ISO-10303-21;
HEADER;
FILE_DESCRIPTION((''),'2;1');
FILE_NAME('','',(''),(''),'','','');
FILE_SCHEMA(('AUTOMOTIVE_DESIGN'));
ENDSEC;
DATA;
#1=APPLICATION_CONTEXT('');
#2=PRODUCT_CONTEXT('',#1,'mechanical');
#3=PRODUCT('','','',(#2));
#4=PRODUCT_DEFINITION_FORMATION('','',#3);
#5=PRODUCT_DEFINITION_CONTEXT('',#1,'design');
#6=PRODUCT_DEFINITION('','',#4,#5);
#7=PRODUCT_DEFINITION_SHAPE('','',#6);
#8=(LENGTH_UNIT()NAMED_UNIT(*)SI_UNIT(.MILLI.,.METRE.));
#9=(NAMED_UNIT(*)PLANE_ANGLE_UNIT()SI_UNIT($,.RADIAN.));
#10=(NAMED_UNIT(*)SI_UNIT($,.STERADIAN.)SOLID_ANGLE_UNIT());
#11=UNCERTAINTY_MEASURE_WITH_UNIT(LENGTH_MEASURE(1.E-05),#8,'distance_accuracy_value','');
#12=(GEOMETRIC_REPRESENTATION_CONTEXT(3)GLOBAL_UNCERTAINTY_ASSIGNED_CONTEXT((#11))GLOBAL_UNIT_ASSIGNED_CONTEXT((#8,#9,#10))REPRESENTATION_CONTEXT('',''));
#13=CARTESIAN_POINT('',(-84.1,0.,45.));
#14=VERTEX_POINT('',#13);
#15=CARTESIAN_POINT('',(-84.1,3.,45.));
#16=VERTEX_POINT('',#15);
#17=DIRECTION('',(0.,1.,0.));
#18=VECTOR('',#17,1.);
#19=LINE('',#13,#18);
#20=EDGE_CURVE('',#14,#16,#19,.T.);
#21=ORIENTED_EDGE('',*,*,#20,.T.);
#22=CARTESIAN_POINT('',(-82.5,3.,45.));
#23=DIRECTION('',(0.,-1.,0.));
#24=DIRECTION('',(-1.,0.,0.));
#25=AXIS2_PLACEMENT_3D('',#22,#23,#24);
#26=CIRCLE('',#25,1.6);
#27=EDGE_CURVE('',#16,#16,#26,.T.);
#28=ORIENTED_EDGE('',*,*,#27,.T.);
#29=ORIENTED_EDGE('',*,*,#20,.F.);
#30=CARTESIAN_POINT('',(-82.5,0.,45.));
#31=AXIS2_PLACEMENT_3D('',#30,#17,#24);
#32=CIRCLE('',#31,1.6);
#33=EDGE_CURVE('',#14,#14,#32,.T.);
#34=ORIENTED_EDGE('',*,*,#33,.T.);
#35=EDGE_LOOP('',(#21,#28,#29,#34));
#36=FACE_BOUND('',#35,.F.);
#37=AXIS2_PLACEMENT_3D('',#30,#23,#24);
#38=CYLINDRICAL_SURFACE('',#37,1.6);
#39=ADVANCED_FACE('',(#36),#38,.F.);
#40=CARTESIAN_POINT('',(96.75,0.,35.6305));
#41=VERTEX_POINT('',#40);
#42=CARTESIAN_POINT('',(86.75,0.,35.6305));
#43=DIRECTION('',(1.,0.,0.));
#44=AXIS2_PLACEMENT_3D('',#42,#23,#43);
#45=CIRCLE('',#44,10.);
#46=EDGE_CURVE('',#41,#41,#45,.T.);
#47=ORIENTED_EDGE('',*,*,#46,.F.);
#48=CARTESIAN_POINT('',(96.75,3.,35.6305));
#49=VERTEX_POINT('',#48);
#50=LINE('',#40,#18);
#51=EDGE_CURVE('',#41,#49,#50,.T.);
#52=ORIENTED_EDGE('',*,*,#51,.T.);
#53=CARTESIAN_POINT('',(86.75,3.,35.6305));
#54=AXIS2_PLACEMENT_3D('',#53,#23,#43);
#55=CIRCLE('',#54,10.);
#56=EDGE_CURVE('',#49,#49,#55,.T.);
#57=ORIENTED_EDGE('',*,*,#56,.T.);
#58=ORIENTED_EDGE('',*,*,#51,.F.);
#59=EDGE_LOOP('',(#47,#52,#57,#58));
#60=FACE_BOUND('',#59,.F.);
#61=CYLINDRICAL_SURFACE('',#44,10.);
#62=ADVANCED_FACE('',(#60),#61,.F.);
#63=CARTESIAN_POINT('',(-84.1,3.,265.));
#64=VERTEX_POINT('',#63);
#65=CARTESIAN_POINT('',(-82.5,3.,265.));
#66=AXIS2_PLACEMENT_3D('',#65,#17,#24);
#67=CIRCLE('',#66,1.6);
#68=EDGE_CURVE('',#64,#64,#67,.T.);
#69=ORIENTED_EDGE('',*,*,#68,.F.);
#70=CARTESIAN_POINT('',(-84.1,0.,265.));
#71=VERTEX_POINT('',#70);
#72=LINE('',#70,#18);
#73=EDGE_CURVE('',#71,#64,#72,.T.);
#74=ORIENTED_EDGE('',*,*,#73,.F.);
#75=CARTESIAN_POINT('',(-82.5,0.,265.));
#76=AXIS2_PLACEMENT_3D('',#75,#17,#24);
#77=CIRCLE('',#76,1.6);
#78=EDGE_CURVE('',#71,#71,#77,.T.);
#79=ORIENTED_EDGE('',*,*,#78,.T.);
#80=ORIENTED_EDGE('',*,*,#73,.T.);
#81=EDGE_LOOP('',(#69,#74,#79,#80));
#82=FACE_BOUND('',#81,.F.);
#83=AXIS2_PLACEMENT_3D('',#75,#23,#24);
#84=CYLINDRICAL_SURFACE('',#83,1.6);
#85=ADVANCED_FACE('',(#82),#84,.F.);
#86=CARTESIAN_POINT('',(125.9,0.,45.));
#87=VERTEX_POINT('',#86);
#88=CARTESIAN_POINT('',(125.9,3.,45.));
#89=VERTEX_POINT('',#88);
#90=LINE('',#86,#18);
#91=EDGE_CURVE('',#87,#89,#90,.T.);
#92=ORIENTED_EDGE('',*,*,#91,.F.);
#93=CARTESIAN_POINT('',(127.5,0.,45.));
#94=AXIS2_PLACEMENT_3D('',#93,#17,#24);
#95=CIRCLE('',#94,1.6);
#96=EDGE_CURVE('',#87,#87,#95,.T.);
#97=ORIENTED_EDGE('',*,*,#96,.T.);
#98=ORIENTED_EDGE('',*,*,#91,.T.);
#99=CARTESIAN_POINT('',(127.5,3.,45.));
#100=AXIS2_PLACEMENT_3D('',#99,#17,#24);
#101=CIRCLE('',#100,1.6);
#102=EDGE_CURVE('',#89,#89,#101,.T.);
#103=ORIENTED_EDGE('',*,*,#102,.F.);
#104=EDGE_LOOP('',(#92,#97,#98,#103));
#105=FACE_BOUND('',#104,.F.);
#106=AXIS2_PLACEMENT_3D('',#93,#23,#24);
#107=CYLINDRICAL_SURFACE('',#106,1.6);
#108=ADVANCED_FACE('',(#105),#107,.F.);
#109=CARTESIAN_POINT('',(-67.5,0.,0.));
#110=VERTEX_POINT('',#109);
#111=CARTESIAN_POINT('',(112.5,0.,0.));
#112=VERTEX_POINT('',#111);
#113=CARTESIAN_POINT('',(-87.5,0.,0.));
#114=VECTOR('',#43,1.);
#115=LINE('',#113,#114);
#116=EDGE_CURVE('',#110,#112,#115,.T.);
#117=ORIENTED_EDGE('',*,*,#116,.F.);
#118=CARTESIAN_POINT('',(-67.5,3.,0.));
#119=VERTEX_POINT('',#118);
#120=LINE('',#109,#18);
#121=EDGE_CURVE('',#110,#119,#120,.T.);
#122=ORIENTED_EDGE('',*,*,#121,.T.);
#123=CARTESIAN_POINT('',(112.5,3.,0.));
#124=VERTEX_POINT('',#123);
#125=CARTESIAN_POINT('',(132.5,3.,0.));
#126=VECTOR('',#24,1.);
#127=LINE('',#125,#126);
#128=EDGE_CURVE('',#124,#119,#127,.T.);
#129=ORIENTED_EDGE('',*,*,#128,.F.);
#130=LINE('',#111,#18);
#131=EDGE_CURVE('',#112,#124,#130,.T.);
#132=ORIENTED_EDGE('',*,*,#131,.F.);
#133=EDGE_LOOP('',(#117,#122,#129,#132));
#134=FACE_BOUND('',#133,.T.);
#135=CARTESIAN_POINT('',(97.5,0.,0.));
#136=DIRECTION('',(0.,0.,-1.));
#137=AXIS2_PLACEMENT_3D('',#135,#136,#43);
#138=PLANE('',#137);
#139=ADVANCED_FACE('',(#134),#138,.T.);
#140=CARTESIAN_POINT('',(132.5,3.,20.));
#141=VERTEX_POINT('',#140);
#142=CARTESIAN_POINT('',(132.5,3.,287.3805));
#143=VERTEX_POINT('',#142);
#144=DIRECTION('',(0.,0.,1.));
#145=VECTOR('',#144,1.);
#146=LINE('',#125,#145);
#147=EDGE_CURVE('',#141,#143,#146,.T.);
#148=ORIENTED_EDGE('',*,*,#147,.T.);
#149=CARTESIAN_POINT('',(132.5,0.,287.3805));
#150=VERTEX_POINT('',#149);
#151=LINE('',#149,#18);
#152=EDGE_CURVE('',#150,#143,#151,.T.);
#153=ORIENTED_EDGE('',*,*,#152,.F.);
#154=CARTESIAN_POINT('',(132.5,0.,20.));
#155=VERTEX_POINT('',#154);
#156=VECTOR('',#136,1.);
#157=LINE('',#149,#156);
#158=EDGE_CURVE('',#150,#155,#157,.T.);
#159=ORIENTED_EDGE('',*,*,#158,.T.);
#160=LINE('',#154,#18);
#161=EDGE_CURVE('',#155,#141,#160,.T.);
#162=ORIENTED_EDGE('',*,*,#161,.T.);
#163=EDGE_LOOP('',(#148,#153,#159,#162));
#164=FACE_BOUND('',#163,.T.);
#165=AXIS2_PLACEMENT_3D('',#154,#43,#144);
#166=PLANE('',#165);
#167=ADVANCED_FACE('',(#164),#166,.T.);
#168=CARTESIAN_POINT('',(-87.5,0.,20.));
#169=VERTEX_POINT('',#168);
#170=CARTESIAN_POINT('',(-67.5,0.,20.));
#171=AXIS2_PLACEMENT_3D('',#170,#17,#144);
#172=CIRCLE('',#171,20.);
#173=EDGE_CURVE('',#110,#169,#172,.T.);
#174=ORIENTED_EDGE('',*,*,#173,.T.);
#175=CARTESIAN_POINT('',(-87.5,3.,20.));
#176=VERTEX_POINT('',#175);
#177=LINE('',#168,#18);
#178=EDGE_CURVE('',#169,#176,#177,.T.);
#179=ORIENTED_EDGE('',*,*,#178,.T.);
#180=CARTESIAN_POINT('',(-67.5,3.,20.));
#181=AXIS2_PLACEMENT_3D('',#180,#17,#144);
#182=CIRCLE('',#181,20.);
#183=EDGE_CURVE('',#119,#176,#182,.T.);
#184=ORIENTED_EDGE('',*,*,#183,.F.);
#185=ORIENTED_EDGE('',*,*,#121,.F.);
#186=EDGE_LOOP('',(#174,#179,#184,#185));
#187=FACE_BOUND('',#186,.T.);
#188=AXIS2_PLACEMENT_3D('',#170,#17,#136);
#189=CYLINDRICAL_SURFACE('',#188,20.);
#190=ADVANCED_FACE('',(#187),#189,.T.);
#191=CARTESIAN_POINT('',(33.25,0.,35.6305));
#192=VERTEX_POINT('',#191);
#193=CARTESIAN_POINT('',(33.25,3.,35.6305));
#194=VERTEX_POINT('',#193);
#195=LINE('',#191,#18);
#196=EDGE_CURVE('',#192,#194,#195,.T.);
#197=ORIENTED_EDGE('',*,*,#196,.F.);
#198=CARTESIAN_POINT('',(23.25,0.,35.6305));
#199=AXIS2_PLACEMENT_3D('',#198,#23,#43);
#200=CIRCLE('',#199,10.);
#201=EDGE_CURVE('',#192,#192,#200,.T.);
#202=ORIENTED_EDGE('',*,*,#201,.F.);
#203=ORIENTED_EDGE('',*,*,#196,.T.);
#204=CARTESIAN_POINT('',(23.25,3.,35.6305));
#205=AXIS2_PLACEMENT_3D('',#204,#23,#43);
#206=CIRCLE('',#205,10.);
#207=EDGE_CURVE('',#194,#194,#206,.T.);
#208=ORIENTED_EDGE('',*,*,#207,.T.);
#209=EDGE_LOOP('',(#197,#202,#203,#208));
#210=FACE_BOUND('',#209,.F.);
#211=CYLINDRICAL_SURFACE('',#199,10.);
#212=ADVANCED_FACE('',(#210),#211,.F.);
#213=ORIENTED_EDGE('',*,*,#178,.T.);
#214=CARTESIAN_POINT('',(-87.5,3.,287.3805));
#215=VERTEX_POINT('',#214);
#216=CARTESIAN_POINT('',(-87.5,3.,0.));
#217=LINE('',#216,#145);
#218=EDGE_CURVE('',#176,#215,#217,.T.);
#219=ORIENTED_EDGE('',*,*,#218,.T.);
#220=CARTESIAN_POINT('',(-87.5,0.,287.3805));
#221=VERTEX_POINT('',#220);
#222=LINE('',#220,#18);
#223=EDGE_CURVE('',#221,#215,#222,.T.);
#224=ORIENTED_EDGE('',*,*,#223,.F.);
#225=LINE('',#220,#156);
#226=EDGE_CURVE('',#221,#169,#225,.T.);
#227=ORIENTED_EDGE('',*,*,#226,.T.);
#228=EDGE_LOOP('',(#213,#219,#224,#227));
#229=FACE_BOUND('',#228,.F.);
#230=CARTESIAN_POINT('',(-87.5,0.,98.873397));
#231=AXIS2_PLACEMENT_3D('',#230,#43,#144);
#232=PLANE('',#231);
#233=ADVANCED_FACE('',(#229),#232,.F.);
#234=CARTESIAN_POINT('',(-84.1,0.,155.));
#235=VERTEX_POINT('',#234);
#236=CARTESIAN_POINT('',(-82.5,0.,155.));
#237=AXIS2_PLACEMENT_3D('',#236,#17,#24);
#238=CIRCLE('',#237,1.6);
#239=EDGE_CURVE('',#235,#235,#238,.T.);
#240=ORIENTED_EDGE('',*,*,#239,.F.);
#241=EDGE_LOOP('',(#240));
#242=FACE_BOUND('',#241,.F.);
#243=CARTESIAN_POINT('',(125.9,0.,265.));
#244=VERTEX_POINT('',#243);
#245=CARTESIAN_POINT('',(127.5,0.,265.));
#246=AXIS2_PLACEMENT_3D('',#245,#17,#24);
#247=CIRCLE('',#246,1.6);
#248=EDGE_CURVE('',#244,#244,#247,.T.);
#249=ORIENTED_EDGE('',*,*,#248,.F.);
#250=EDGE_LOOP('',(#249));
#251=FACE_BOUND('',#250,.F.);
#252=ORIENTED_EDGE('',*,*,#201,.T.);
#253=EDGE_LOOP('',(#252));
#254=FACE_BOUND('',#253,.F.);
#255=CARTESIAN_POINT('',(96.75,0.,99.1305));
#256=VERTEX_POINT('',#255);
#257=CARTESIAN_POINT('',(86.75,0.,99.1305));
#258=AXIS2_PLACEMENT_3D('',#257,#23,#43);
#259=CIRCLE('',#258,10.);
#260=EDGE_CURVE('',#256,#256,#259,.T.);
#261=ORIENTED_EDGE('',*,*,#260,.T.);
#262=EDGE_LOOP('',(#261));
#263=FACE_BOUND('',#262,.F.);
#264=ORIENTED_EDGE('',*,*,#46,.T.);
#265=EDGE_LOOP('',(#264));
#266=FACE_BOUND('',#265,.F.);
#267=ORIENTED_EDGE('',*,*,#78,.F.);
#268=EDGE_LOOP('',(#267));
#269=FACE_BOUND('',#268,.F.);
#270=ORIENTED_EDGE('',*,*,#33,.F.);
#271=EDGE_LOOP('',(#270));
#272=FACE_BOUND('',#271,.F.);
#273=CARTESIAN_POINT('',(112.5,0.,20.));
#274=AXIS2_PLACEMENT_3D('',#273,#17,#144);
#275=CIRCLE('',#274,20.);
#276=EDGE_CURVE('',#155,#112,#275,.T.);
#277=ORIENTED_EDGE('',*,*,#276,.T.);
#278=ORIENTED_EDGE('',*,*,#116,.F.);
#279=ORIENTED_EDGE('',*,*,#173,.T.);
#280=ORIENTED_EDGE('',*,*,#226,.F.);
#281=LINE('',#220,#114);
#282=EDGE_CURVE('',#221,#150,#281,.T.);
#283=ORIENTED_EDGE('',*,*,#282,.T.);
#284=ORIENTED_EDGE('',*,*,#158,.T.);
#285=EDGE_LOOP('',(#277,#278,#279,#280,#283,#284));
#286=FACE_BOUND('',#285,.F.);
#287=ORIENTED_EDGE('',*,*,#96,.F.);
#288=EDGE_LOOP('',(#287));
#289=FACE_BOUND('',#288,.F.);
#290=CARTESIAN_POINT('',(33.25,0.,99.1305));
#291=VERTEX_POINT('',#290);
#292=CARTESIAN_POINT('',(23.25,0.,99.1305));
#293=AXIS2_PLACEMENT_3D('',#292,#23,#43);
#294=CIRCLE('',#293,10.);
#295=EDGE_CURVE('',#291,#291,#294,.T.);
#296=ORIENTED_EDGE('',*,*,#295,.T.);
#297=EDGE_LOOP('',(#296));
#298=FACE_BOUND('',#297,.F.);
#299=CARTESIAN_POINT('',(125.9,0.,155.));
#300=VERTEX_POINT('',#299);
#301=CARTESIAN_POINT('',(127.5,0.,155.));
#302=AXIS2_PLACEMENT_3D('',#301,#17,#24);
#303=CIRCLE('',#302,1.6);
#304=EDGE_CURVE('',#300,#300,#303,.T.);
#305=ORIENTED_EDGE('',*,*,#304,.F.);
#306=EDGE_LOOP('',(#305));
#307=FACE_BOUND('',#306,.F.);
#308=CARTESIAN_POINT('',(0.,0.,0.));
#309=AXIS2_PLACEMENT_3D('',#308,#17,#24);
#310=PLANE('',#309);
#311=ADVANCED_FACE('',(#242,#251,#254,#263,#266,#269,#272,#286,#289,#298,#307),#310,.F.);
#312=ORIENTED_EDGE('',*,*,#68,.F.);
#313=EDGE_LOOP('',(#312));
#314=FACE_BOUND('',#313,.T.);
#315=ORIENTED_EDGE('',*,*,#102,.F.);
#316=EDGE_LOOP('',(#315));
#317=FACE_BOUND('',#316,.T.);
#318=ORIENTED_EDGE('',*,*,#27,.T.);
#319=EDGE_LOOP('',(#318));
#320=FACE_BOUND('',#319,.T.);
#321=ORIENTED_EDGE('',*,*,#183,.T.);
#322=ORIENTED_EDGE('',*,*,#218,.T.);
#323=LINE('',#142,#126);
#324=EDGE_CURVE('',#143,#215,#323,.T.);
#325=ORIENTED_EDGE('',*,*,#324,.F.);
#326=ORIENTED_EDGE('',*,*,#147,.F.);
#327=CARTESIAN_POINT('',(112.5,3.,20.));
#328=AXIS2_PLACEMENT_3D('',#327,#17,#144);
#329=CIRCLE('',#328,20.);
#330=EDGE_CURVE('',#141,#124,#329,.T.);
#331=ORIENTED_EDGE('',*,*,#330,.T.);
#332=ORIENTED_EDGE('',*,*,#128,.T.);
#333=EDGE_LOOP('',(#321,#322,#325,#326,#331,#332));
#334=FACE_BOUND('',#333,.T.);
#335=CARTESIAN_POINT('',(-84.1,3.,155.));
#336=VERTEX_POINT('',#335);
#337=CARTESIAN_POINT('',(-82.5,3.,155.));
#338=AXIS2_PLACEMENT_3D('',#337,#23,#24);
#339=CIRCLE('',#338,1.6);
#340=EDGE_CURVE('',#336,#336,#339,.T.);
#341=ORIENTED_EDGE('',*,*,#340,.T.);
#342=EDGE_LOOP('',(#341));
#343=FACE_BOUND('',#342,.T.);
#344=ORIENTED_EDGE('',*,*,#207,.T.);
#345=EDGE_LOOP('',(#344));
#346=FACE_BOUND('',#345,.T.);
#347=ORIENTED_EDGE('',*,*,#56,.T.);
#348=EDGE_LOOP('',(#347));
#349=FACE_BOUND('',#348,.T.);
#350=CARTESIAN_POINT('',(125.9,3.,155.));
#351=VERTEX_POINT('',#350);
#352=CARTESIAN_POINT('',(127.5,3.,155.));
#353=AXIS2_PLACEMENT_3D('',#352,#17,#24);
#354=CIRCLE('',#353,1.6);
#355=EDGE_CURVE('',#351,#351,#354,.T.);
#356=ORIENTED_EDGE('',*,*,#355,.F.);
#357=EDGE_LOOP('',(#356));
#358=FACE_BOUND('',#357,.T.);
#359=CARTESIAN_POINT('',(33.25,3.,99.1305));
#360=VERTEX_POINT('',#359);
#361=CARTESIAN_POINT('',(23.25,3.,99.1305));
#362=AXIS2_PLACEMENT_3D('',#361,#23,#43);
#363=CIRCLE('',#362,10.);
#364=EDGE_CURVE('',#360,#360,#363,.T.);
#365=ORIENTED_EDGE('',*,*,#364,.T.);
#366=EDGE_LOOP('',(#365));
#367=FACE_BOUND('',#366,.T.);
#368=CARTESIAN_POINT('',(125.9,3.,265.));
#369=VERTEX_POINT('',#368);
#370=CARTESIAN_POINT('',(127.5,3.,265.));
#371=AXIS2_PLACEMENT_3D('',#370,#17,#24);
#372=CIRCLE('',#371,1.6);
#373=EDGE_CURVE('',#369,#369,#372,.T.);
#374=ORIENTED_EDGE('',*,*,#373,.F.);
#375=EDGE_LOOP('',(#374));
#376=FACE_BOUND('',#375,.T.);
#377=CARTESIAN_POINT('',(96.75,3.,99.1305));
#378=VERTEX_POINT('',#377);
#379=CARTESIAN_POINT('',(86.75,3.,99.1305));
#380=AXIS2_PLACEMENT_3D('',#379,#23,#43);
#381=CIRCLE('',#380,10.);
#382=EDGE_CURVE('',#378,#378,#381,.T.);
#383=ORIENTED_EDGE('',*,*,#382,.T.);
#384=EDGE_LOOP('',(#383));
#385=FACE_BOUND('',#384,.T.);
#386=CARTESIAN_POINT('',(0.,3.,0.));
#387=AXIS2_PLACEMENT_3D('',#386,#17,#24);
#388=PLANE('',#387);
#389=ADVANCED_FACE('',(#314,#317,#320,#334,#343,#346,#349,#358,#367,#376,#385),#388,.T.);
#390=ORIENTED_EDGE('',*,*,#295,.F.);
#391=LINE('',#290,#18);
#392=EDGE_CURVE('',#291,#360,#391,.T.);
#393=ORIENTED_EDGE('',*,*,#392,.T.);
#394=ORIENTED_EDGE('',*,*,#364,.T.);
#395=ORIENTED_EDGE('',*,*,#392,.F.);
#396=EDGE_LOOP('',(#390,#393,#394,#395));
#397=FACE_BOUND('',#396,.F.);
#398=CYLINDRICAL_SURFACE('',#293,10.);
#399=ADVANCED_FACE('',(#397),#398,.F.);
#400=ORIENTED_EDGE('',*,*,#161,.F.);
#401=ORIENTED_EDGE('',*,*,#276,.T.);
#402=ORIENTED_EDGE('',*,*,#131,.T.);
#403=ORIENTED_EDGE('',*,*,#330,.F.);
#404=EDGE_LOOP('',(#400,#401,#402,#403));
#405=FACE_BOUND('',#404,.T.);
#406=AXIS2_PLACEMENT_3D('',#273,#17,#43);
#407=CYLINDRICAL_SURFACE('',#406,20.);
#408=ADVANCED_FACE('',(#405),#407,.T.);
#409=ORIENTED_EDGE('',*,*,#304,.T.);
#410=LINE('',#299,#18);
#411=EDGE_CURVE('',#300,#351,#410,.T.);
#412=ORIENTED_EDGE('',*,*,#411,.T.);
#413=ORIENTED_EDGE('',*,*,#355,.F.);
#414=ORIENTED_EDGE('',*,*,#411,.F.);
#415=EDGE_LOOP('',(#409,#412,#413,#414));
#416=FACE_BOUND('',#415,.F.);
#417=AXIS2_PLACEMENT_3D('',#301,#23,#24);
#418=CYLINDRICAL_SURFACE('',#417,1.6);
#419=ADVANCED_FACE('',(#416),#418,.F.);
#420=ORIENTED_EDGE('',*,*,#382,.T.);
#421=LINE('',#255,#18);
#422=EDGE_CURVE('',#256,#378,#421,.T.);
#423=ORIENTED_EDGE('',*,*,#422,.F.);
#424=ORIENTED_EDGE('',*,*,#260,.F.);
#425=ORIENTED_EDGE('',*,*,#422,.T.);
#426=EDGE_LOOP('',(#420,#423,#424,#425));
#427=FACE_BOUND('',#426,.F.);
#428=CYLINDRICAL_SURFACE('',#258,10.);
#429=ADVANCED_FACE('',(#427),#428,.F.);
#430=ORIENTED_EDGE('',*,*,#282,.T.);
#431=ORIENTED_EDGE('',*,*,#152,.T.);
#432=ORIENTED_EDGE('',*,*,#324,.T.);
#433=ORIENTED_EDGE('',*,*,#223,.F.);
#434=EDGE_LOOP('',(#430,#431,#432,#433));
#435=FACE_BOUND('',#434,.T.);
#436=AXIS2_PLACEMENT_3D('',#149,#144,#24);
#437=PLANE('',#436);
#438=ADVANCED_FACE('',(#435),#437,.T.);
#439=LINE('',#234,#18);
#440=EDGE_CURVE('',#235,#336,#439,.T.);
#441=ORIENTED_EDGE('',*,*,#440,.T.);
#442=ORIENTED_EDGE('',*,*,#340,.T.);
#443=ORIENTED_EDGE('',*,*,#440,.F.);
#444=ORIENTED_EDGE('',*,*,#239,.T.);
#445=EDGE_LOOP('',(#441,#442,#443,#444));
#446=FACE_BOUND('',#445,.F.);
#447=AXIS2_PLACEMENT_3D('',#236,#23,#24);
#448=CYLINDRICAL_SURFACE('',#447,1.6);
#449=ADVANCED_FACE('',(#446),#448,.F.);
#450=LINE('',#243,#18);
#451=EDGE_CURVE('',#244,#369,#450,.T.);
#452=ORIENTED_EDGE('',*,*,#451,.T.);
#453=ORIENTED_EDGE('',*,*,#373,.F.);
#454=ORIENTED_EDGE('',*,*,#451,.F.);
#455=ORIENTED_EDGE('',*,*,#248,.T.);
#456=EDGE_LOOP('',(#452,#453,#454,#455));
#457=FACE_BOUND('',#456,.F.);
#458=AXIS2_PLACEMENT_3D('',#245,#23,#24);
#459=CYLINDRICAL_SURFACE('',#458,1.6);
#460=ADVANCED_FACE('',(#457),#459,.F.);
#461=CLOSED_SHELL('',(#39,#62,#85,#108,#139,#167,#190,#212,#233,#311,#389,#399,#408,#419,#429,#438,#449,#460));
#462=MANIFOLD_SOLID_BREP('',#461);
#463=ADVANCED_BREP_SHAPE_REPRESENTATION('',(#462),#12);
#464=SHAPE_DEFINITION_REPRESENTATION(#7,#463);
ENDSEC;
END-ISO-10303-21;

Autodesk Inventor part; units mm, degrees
ref_plane "YZ Plane" through (0, 0, 0) normal (1, 0, 0) x (0, 1, 0)
ref_plane "XZ Plane" through (0, 0, 0) normal (0, 1, 0) x (-1, 0, 0)
ref_plane "XY Plane" through (0, 0, 0) normal (0, 0, 1) x (1, 0, 0)
sketch "Sketch1" plane through (0, 0, 0) normal (0, 1, 0) x (-1, 0, 0)
  line L0 (-132.5, 287.3805) -> (-122.5, 287.3805)
  line L1 (-132.5, 20) -> (-132.5, 287.3805)
  line L2 (-122.5, 20) -> (-122.5, 287.3805)
  line L3 (77.5, 287.3805) -> (87.5, 287.3805)
  line L4 (77.5, 20) -> (77.5, 287.3805)
  line L5 (87.5, 20) -> (87.5, 287.3805)
  line L6 (82.5, 0) -> (127.5, 0) construction
  line L7 (-132.5, 20) -> (-132.5, 287.3805)
  line L8 (82.5, 45) -> (-127.5, 45)
  line L9 (82.5, 155) -> (-127.5, 155)
  circle A0 centre (-127.5, 265) radius 1.6
  circle A1 centre (-127.5, 155) radius 1.6
  circle A2 centre (-127.5, 45) radius 1.6
  circle A3 centre (82.5, 45) radius 1.6
  circle A4 centre (82.5, 155) radius 1.6
  circle A5 centre (82.5, 265) radius 1.6
  line L10 (-132.5, 287.3805) -> (87.5, 287.3805)
  line L11 (87.5, 287.3805) -> (87.5, 0)
  line L12 (87.5, 0) -> (-132.5, 0)
  line L13 (-132.5, 0) -> (-132.5, 287.3805)
  line L14 (87.5, 0) -> (-132.5, 0)
  line L15 (-132.5, 0) -> (-132.5, -22.8)
  line L16 (-132.5, -22.8) -> (87.5, -22.8)
  line L17 (87.5, -22.8) -> (87.5, 0)
  arc A6 (6, 100) -> (0, 94) centre (6, 94) ccw
  line L18 (0, 0) -> (0, 94)
  line L19 (0, 0) -> (90, 0)
  line L20 (90, 0) -> (90, 94)
  arc A7 (90, 94) -> (84, 100) centre (84, 94) ccw
  line L21 (6, 100) -> (84, 100)
  circle A8 centre (45, 47.3805) radius 11
  circle A9 centre (76.75, 79.1305) radius 5.75
  circle A10 centre (13.25, 15.6305) radius 5.75
  circle A11 centre (76.75, 15.6305) radius 5.75
  circle A12 centre (13.25, 79.1305) radius 5.75
  circle A13 centre (117.5, 135) radius 1.8
  line L22 (112.5, 267.3805) -> (122.5, 267.3805)
  line L23 (112.5, 0) -> (112.5, 267.3805)
  line L24 (112.5, 0) -> (122.5, 0)
  line L25 (122.5, 0) -> (122.5, 267.3805)
  circle A14 centre (117.5, 25) radius 1.8
  circle A15 centre (117.5, 245) radius 1.8
  circle A16 centre (-92.5, 135) radius 1.8
  line L26 (-97.5, 267.3805) -> (-87.5, 267.3805)
  line L27 (-97.5, 0) -> (-97.5, 267.3805)
  line L28 (-97.5, 0) -> (-87.5, 0)
  line L29 (-87.5, 0) -> (-87.5, 267.3805)
  circle A17 centre (-92.5, 245) radius 1.8
  circle A18 centre (-92.5, 25) radius 1.8
  point P0 (-62.5, 0)
  point P1 (52.5, -20)
  dimension "d0" = 45
  dimension "d2" = 110
  dimension "d4" = 3.2
  dimension "d5" = 3.2
  dimension "d6" = 3.2
  dimension "d7" = 3.2
  dimension "d8" = 3.2
  dimension "d9" = 3.2
  dimension "d12" = 22.8
extrude "Extrusion1" add sketch "Sketch1" along normal blind 3 contours L0 L2 L8 L27 L12 L13 L1 | L10 L4 L9 L29 L26 L27 L2 | L9 L27 L8 L2 | L3 L5 A7 L21 L4 | L27 L26 L29 L9 | L9 L29 L8 L27 | L4 L21 A6 L18 L8 L29 L9 | L27 L8 L29 L12 | L5 L11 L12 L18 L8 A8 L4 A9 L21 A7 | L4 A9 L8 A8 L18 A6 L21 | L29 L8 L18 L12 | A9 L4 | L4 A9 | A8 L8 | L8 A8 | A10 | A11 | A12 | A16 | A17 | A18
fillet "Fillet1" radius 20 2 edges at (132.5, 1.5, 0) (-87.5, 1.5, 0)
sketch "Sketch3" plane through (0, 0, 0) normal (0, -1, 0) x (1, 0, 0)
  line L0 (92.3, 110.2305) -> (17.7, 110.2305)
  circle A0 centre (23.25, 99.1305) radius 4.9999
  circle A1 centre (86.75, 99.1305) radius 4.9999
  circle A2 centre (23.25, 35.6305) radius 4.9999
  circle A3 centre (86.75, 35.6305) radius 4.9999
  line L1 (10, 20) -> (10, 114)
  line L2 (100, 20) -> (100, 114)
  line L3 (112.5, 0) -> (-67.5, 0)
  line L4 (132.5, 287.3805) -> (132.5, 20)
  line L5 (-87.5, 20) -> (-87.5, 287.3805)
  line L6 (-87.5, 287.3805) -> (132.5, 287.3805)
  arc A4 (-87.5, 20) -> (-67.5, 0) centre (-67.5, 20) ccw projected
  line L7 (112.5, 0) -> (-67.5, 0) projected
  arc A5 (112.5, 0) -> (132.5, 20) centre (112.5, 20) ccw projected
  line L8 (132.5, 287.3805) -> (132.5, 20) projected
  line L9 (-87.5, 287.3805) -> (132.5, 287.3805) projected
  line L10 (-87.5, 20) -> (-87.5, 287.3805) projected
  circle A6 centre (127.5, 155) radius 1.6 projected
  circle A7 centre (127.5, 45) radius 1.6 projected
  circle A8 centre (-82.5, 45) radius 1.6 projected
  circle A9 centre (-82.5, 155) radius 1.6 projected
  circle A10 centre (127.5, 265) radius 1.6 projected
  circle A11 centre (-82.5, 265) radius 1.6 projected
  circle A12 centre (86.75, 99.1305) radius 10
  circle A13 centre (86.75, 35.6305) radius 10
  circle A14 centre (23.25, 99.1305) radius 10
  circle A15 centre (23.25, 35.6305) radius 10
  point P0 (0, 0)
  dimension "d18" = 20
  dimension "d19" = 20
  dimension "d20" = 20
  dimension "d21" = 20
extrude "Extrusion2" cut sketch "Sketch3" against normal up to surface (3 mm away) contours A0 | A1 | A2 | A3 | A12 | A13 | A14 | A15
equation "\"BendRadius\" = Thickness"
equation "\"BendReliefWidth\" = Thickness"
equation "\"BendReliefDepth\" = 0.5 * Thickness"
equation "\"CornerReliefSize\" = 4 * Thickness"
equation "\"MinimumRemnant\" = 2 * Thickness"
equation "\"TransitionRadius\" = BendRadius"
equation "\"JacobiRadiusSize\" = Thickness"
equation "\"GapSize\" = Thickness"
equation "\"Thickness\" = 0.5"
properties part number "obudowa_zewnetrzna_przod" material "ABS Plastic"
